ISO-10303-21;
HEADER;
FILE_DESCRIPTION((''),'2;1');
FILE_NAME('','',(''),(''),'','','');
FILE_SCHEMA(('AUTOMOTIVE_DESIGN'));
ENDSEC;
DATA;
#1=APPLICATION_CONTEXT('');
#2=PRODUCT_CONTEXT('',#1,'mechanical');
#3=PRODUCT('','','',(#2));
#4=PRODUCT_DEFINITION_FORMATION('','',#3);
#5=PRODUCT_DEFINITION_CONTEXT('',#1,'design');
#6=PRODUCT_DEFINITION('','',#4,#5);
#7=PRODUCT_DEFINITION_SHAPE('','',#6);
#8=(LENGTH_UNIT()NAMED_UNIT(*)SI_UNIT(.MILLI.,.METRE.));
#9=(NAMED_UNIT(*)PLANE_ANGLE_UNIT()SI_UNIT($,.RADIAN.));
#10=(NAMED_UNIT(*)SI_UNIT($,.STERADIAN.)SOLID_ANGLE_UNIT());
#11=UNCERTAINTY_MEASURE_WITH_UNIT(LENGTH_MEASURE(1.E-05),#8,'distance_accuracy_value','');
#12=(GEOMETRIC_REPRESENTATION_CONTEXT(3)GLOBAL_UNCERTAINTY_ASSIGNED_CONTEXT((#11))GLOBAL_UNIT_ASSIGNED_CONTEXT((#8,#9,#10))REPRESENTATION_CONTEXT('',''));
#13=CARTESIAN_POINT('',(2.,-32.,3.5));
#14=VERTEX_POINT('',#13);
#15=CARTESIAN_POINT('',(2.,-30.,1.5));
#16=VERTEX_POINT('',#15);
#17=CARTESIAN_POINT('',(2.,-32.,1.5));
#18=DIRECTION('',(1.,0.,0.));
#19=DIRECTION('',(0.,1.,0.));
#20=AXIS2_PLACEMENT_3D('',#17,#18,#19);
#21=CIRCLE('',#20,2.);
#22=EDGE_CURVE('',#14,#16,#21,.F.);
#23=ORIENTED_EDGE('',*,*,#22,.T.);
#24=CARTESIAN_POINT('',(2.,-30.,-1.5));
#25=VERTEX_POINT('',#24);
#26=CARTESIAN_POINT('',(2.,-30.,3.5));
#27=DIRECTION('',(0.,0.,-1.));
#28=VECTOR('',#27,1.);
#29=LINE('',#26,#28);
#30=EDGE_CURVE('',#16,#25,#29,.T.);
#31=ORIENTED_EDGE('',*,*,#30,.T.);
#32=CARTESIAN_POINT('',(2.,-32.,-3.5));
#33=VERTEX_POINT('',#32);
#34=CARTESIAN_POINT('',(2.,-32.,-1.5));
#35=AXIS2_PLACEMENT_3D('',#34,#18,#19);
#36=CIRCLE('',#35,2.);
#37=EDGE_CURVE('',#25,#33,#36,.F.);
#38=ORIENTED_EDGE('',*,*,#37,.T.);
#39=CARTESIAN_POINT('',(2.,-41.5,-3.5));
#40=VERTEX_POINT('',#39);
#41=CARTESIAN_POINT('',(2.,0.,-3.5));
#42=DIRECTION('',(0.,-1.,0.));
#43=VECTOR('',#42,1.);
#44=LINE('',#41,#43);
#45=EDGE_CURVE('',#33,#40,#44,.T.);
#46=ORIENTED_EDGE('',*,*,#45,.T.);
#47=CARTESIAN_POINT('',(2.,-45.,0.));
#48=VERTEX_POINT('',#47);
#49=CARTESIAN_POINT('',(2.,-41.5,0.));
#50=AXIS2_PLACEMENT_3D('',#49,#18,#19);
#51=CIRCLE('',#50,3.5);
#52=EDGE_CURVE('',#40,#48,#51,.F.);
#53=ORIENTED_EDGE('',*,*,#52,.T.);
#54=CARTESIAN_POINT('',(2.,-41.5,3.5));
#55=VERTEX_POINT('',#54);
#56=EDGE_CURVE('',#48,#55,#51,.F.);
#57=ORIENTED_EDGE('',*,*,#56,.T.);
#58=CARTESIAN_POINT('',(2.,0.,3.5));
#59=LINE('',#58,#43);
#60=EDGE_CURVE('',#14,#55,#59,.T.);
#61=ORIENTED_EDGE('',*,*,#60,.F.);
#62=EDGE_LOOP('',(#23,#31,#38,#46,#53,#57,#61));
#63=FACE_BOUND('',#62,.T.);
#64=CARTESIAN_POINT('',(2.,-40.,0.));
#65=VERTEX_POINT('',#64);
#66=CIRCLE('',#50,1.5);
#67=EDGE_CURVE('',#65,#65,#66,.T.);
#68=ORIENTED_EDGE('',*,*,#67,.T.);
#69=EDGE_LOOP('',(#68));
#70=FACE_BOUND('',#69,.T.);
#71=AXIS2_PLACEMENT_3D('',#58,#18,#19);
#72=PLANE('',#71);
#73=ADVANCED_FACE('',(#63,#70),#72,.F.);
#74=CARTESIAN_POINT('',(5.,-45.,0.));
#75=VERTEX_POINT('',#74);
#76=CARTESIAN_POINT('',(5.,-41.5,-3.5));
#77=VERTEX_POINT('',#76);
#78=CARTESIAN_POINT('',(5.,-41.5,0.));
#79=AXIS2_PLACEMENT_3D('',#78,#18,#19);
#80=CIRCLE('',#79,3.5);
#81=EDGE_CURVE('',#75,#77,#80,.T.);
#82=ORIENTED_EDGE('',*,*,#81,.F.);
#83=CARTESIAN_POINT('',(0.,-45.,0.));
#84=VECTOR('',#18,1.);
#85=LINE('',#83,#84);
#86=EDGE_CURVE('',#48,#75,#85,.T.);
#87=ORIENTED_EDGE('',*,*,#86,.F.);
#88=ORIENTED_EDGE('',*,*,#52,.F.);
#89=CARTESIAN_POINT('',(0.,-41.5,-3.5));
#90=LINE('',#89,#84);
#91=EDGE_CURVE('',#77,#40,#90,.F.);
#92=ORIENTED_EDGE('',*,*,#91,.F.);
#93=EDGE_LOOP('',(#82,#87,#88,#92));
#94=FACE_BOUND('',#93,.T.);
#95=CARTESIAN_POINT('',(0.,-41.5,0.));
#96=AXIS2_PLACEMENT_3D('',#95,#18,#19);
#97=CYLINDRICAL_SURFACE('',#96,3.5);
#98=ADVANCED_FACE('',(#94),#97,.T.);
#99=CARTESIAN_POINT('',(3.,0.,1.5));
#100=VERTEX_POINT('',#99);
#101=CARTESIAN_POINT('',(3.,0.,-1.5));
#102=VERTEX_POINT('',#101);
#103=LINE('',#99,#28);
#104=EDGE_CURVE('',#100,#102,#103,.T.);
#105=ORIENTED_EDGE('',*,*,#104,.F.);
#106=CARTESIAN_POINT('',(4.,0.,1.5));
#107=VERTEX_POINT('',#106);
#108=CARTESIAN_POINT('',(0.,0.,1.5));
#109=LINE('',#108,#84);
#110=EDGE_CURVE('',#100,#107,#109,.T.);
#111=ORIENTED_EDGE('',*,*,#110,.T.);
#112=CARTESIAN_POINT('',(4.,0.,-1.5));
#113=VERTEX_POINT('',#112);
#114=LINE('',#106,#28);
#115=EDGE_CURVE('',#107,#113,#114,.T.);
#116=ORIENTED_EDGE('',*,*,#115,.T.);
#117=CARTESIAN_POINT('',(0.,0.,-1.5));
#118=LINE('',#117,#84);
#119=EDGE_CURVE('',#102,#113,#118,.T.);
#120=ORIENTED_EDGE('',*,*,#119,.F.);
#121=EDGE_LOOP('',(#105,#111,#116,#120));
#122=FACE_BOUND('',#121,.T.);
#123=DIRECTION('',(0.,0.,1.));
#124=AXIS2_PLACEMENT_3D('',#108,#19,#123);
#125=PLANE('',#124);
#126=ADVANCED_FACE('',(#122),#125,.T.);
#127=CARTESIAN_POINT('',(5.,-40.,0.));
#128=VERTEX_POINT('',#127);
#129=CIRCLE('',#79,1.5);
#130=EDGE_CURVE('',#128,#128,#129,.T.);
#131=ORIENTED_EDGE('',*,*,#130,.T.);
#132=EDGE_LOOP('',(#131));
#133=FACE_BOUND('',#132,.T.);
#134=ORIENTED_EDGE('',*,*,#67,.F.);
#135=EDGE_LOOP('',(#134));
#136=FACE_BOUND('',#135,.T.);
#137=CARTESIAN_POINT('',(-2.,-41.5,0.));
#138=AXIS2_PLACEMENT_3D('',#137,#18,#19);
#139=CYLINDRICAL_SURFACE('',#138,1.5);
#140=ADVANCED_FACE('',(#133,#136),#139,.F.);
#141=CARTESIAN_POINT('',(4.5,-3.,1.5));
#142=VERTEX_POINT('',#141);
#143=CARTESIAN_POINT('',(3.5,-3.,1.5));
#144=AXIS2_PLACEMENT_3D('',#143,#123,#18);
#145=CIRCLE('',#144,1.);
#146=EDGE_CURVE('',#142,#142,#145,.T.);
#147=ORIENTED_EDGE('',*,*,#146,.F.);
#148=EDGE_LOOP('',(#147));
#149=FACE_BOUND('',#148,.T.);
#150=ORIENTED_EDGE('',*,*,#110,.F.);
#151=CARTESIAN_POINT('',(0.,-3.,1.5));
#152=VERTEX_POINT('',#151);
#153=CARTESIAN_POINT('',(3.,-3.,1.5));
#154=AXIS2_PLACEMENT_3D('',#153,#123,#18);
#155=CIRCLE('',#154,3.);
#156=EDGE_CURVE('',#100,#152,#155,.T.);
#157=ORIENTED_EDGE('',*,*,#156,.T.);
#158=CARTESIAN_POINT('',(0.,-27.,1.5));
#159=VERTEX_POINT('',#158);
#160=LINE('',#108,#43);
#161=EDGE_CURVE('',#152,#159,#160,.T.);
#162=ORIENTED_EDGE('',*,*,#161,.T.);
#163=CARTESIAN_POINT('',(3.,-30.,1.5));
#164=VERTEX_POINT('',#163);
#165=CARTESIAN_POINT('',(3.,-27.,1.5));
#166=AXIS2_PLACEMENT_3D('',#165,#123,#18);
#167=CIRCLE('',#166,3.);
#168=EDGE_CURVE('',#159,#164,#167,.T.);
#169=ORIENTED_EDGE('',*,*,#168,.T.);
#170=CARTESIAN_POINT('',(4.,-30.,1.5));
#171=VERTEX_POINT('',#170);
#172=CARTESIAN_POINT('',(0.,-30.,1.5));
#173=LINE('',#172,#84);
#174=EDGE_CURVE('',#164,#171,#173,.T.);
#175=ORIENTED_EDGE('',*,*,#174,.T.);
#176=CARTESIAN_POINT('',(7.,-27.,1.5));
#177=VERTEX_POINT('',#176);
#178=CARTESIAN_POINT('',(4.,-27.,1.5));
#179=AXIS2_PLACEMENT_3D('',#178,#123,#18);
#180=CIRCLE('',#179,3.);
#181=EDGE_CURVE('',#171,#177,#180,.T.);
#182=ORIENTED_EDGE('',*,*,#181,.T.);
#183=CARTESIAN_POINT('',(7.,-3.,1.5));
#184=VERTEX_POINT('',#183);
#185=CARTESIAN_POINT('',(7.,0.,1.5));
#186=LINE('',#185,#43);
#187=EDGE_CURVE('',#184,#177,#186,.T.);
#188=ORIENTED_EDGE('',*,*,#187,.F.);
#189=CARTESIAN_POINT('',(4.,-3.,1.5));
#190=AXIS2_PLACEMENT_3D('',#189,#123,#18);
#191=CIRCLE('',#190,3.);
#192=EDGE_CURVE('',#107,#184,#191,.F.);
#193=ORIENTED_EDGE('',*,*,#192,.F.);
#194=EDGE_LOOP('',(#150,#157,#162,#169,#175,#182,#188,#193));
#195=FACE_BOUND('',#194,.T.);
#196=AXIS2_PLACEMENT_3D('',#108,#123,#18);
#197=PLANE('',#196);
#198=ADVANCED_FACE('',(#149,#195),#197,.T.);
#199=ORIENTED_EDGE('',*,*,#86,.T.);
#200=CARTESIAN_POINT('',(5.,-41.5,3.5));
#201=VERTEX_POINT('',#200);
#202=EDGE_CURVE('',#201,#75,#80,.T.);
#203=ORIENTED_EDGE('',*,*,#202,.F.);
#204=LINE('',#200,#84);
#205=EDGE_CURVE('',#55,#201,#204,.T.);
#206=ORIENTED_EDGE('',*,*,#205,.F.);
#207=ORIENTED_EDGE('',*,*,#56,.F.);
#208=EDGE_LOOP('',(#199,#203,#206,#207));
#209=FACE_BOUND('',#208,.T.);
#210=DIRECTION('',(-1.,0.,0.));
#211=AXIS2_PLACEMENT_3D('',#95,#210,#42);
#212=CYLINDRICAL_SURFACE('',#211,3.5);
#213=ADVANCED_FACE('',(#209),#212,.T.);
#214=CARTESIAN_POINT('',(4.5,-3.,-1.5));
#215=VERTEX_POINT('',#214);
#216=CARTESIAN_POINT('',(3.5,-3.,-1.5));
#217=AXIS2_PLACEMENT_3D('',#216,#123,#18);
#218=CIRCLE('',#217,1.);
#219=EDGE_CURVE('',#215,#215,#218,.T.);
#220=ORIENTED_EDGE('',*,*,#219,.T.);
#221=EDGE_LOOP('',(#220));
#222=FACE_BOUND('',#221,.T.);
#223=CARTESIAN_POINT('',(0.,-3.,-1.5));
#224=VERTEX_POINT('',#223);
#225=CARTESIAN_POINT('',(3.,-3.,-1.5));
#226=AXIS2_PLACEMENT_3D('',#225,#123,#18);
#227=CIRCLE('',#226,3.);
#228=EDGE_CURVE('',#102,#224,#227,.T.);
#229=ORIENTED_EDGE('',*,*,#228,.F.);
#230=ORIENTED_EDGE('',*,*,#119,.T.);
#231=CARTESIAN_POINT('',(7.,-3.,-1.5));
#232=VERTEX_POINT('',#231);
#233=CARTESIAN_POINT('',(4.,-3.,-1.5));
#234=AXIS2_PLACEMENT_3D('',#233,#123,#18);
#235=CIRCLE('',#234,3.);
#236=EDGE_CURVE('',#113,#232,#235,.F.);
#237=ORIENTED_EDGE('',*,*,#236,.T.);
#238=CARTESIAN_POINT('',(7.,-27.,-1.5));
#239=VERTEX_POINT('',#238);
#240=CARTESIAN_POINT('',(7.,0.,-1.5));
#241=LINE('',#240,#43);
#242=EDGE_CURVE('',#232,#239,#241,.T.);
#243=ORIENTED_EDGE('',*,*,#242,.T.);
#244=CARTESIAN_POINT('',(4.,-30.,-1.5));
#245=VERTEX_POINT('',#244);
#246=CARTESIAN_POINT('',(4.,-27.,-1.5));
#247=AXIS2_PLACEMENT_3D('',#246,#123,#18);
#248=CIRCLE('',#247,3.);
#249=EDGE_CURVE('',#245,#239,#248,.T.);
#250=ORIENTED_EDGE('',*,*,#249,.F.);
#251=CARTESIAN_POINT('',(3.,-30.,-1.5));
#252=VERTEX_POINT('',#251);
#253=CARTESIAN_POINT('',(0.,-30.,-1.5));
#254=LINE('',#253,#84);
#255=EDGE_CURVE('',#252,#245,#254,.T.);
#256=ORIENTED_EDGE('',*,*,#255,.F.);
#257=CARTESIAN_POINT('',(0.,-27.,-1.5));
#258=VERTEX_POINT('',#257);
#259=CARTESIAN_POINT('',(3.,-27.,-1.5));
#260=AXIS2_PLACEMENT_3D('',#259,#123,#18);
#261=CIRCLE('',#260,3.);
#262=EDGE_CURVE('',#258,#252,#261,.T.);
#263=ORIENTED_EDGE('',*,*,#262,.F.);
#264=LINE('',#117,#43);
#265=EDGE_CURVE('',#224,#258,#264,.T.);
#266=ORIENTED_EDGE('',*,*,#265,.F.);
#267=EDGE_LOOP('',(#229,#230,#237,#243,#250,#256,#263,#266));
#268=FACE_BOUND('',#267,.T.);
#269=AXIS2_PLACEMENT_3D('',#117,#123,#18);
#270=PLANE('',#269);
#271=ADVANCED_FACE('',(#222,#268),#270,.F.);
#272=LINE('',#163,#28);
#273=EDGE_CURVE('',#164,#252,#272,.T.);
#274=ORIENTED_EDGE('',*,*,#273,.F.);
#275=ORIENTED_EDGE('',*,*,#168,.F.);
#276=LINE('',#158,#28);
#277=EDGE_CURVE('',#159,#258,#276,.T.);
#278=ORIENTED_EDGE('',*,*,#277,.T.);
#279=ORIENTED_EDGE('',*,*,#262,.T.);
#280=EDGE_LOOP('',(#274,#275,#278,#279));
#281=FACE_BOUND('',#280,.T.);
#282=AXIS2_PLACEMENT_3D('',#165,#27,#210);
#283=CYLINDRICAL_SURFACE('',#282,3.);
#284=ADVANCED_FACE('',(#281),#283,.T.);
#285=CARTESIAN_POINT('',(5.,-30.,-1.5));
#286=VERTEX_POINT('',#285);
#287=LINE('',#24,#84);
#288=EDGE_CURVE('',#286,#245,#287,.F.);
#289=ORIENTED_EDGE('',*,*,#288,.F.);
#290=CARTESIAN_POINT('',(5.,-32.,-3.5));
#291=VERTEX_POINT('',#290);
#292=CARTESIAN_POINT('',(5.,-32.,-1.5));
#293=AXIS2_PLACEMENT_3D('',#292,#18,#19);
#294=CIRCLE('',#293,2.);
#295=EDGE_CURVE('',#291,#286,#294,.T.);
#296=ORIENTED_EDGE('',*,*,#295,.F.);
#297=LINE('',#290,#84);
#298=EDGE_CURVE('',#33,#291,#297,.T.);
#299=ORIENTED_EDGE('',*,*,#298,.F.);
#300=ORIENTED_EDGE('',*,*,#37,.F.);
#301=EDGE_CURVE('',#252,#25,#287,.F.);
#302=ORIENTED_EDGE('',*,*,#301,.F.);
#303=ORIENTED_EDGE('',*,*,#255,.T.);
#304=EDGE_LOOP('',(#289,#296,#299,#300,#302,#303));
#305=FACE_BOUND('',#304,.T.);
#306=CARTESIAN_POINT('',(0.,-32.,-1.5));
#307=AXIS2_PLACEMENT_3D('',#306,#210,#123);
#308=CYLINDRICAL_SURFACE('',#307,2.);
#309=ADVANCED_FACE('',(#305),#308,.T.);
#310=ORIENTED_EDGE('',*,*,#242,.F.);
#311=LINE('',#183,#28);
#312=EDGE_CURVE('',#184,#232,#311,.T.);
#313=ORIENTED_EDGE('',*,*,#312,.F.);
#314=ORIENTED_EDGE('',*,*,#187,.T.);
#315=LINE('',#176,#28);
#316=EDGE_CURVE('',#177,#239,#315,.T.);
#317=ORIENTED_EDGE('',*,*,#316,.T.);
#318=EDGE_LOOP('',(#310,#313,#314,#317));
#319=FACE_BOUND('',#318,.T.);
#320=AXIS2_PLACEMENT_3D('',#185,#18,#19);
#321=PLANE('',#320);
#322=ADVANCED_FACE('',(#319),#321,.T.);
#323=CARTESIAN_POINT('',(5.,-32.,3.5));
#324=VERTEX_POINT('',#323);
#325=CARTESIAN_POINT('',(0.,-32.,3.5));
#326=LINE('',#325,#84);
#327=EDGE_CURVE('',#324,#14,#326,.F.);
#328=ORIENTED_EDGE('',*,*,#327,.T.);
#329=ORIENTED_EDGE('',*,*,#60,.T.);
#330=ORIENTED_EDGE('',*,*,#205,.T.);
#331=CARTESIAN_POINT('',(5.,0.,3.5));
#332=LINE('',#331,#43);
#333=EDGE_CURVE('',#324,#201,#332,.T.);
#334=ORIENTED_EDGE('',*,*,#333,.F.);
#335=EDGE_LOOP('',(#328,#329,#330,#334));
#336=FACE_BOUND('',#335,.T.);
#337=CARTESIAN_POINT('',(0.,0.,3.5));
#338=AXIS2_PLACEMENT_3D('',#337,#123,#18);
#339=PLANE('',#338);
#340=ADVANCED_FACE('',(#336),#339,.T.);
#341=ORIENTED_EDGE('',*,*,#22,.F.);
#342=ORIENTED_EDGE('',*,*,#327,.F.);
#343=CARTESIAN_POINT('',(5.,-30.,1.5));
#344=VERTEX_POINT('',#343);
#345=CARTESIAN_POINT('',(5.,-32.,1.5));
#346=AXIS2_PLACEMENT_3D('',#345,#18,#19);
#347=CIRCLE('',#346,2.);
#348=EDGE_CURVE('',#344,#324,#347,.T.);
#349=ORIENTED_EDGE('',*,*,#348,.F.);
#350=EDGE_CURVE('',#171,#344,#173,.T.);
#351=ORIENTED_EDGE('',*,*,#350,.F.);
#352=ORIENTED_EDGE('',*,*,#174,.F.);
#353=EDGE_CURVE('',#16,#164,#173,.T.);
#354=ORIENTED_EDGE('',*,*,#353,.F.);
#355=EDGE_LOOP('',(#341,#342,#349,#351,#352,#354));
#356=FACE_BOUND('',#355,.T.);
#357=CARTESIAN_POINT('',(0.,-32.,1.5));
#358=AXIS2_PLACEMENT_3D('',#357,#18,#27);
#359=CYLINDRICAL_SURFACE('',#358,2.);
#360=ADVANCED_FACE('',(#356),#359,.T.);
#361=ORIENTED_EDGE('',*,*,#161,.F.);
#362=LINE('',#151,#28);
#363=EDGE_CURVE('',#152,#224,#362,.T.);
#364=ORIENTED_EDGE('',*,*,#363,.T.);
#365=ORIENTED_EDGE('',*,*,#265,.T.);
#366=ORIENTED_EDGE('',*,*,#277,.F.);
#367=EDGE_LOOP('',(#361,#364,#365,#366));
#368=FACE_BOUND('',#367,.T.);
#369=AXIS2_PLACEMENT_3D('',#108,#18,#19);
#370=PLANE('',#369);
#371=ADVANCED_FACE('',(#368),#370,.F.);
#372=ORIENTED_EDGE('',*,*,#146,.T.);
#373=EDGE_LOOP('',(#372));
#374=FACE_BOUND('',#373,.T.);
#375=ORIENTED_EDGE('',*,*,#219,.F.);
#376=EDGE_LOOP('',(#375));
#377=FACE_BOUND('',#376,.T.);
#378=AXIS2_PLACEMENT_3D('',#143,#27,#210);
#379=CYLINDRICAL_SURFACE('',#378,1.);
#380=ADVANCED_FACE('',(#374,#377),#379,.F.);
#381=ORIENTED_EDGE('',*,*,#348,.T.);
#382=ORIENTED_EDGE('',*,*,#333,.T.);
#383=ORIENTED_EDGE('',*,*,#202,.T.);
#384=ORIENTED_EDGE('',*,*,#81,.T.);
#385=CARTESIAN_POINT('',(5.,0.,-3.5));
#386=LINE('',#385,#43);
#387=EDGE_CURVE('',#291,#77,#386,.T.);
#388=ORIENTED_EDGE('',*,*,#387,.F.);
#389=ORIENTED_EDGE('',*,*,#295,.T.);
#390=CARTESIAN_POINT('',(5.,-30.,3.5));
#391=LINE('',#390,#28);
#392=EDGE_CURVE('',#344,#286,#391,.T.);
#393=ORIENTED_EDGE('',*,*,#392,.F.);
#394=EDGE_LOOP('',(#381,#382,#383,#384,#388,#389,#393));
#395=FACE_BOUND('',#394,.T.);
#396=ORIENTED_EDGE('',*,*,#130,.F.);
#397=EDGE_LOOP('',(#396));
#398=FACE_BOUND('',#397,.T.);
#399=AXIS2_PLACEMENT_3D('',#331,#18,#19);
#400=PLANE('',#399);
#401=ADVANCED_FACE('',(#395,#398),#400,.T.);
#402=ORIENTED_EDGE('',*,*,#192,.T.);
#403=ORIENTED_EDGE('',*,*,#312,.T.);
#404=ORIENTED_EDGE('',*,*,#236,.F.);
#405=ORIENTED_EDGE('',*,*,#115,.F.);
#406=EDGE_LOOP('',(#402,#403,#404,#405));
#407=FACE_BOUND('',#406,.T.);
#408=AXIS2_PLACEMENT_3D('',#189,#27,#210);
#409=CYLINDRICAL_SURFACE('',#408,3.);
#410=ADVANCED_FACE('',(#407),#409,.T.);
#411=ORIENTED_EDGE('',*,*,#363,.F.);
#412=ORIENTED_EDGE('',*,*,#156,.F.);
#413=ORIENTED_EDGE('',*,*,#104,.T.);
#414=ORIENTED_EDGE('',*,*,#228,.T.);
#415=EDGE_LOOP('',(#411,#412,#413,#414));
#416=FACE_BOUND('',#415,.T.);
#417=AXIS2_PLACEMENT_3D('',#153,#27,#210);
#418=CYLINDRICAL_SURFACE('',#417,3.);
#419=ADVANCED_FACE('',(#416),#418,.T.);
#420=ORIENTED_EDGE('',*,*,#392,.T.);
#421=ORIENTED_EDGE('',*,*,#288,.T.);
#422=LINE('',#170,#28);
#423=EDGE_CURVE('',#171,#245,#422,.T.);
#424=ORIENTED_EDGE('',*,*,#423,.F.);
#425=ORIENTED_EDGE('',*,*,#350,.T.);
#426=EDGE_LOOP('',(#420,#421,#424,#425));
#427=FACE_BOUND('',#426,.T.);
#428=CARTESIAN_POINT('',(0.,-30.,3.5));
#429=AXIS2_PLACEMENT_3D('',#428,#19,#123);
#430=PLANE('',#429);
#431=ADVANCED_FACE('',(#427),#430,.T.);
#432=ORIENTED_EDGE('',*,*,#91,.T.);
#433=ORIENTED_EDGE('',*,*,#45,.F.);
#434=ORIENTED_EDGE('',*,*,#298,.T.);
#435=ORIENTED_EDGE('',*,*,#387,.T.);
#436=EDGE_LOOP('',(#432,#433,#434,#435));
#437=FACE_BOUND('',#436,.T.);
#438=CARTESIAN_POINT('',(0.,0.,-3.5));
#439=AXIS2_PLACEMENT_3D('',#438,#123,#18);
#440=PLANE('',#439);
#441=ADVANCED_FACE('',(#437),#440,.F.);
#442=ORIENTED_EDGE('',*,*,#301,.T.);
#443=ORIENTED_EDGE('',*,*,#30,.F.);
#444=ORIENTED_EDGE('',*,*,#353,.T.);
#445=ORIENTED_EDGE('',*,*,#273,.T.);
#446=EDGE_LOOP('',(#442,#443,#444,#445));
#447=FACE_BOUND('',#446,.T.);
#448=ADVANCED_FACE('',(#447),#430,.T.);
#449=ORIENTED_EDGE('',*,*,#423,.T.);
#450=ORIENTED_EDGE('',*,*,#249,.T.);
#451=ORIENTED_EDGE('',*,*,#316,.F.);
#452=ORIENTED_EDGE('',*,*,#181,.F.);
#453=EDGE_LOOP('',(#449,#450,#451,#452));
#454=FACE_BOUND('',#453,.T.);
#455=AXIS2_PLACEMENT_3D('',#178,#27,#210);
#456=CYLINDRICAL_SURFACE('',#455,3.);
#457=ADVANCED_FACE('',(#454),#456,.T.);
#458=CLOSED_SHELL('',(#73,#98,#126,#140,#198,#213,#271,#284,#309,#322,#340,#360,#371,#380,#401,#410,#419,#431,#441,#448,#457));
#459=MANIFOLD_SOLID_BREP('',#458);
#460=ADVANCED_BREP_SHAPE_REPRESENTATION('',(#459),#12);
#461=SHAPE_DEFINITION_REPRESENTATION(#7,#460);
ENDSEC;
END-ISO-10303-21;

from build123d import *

# Parameters (mm, degrees)
SKETCH1_R           = 1
BOSS_EXTRUDE1_DEPTH = 1.5
BOSS_EXTRUDE2_DEPTH = 3.5
FILLET1_R           = 2
FILLET2_R           = 2
FILLET4_R           = 3.5
SKETCH2_R           = 1.5
CUT_EXTRUDE1_DEPTH  = 7


with BuildPart() as part:
    # Sketch1 → Boss-Extrude1 (new, symmetric)
    with BuildSketch(Plane.XY):
        with BuildLine():
            Line((3, 0), (4, 0))
            ThreePointArc((4, 0), (6.121320344, -0.878679656), (7, -3))
            Line((7, -3), (7, -27))
            ThreePointArc((7, -27), (6.121320344, -29.121320344), (4, -30))
            Line((4, -30), (3, -30))
            ThreePointArc((3, -30), (0.878679656, -29.121320344), (0, -27))
            Line((0, -27), (0, -3))
            ThreePointArc((0, -3), (0.878679656, -0.878679656), (3, 0))
        make_face()
        with Locations((3.5, -3)):
            Circle(SKETCH1_R, mode=Mode.SUBTRACT)
    extrude(amount=BOSS_EXTRUDE1_DEPTH, both=True)

    # Sketch1<3> → Boss-Extrude2 (add, symmetric)
    with BuildSketch(Plane.XY):
        Polygon((4, -30), (3, -30), (2, -30), (2, -45), (5, -45), (5, -30), align=None)
    extrude(amount=BOSS_EXTRUDE2_DEPTH, both=True)

    # Fillet1
    fillet1_edges = [part.edges().sort_by_distance(p)[0] for p in [
        (3.5, -30, 3.5),
    ]]
    fillet(fillet1_edges, radius=FILLET1_R - 0.0001)  # a hair under: the kernel refuses the full size

    # Fillet2
    fillet2_edges = [part.edges().sort_by_distance(p)[0] for p in [
        (3.5, -30, -3.5),
    ]]
    fillet(fillet2_edges, radius=FILLET2_R - 0.0001)  # a hair under: the kernel refuses the full size

    # Fillet4
    fillet4_edges = [part.edges().sort_by_distance(p)[0] for p in [
        (3.5, -45, 3.5),
        (3.5, -45, -3.5),
    ]]
    fillet(fillet4_edges, radius=FILLET4_R - 0.0001)  # a hair under: the kernel refuses the full size

    # Sketch2 → Cut-Extrude1 (cut)
    with BuildSketch(Plane(origin=(5, 0, 0), x_dir=(0, 0, -1), z_dir=(1, 0, 0))):
        with Locations(Location((0, -41.5, 0), (0, 0, 90))):
            Circle(SKETCH2_R)
    extrude(amount=-CUT_EXTRUDE1_DEPTH, mode=Mode.SUBTRACT)


solid = part.part
